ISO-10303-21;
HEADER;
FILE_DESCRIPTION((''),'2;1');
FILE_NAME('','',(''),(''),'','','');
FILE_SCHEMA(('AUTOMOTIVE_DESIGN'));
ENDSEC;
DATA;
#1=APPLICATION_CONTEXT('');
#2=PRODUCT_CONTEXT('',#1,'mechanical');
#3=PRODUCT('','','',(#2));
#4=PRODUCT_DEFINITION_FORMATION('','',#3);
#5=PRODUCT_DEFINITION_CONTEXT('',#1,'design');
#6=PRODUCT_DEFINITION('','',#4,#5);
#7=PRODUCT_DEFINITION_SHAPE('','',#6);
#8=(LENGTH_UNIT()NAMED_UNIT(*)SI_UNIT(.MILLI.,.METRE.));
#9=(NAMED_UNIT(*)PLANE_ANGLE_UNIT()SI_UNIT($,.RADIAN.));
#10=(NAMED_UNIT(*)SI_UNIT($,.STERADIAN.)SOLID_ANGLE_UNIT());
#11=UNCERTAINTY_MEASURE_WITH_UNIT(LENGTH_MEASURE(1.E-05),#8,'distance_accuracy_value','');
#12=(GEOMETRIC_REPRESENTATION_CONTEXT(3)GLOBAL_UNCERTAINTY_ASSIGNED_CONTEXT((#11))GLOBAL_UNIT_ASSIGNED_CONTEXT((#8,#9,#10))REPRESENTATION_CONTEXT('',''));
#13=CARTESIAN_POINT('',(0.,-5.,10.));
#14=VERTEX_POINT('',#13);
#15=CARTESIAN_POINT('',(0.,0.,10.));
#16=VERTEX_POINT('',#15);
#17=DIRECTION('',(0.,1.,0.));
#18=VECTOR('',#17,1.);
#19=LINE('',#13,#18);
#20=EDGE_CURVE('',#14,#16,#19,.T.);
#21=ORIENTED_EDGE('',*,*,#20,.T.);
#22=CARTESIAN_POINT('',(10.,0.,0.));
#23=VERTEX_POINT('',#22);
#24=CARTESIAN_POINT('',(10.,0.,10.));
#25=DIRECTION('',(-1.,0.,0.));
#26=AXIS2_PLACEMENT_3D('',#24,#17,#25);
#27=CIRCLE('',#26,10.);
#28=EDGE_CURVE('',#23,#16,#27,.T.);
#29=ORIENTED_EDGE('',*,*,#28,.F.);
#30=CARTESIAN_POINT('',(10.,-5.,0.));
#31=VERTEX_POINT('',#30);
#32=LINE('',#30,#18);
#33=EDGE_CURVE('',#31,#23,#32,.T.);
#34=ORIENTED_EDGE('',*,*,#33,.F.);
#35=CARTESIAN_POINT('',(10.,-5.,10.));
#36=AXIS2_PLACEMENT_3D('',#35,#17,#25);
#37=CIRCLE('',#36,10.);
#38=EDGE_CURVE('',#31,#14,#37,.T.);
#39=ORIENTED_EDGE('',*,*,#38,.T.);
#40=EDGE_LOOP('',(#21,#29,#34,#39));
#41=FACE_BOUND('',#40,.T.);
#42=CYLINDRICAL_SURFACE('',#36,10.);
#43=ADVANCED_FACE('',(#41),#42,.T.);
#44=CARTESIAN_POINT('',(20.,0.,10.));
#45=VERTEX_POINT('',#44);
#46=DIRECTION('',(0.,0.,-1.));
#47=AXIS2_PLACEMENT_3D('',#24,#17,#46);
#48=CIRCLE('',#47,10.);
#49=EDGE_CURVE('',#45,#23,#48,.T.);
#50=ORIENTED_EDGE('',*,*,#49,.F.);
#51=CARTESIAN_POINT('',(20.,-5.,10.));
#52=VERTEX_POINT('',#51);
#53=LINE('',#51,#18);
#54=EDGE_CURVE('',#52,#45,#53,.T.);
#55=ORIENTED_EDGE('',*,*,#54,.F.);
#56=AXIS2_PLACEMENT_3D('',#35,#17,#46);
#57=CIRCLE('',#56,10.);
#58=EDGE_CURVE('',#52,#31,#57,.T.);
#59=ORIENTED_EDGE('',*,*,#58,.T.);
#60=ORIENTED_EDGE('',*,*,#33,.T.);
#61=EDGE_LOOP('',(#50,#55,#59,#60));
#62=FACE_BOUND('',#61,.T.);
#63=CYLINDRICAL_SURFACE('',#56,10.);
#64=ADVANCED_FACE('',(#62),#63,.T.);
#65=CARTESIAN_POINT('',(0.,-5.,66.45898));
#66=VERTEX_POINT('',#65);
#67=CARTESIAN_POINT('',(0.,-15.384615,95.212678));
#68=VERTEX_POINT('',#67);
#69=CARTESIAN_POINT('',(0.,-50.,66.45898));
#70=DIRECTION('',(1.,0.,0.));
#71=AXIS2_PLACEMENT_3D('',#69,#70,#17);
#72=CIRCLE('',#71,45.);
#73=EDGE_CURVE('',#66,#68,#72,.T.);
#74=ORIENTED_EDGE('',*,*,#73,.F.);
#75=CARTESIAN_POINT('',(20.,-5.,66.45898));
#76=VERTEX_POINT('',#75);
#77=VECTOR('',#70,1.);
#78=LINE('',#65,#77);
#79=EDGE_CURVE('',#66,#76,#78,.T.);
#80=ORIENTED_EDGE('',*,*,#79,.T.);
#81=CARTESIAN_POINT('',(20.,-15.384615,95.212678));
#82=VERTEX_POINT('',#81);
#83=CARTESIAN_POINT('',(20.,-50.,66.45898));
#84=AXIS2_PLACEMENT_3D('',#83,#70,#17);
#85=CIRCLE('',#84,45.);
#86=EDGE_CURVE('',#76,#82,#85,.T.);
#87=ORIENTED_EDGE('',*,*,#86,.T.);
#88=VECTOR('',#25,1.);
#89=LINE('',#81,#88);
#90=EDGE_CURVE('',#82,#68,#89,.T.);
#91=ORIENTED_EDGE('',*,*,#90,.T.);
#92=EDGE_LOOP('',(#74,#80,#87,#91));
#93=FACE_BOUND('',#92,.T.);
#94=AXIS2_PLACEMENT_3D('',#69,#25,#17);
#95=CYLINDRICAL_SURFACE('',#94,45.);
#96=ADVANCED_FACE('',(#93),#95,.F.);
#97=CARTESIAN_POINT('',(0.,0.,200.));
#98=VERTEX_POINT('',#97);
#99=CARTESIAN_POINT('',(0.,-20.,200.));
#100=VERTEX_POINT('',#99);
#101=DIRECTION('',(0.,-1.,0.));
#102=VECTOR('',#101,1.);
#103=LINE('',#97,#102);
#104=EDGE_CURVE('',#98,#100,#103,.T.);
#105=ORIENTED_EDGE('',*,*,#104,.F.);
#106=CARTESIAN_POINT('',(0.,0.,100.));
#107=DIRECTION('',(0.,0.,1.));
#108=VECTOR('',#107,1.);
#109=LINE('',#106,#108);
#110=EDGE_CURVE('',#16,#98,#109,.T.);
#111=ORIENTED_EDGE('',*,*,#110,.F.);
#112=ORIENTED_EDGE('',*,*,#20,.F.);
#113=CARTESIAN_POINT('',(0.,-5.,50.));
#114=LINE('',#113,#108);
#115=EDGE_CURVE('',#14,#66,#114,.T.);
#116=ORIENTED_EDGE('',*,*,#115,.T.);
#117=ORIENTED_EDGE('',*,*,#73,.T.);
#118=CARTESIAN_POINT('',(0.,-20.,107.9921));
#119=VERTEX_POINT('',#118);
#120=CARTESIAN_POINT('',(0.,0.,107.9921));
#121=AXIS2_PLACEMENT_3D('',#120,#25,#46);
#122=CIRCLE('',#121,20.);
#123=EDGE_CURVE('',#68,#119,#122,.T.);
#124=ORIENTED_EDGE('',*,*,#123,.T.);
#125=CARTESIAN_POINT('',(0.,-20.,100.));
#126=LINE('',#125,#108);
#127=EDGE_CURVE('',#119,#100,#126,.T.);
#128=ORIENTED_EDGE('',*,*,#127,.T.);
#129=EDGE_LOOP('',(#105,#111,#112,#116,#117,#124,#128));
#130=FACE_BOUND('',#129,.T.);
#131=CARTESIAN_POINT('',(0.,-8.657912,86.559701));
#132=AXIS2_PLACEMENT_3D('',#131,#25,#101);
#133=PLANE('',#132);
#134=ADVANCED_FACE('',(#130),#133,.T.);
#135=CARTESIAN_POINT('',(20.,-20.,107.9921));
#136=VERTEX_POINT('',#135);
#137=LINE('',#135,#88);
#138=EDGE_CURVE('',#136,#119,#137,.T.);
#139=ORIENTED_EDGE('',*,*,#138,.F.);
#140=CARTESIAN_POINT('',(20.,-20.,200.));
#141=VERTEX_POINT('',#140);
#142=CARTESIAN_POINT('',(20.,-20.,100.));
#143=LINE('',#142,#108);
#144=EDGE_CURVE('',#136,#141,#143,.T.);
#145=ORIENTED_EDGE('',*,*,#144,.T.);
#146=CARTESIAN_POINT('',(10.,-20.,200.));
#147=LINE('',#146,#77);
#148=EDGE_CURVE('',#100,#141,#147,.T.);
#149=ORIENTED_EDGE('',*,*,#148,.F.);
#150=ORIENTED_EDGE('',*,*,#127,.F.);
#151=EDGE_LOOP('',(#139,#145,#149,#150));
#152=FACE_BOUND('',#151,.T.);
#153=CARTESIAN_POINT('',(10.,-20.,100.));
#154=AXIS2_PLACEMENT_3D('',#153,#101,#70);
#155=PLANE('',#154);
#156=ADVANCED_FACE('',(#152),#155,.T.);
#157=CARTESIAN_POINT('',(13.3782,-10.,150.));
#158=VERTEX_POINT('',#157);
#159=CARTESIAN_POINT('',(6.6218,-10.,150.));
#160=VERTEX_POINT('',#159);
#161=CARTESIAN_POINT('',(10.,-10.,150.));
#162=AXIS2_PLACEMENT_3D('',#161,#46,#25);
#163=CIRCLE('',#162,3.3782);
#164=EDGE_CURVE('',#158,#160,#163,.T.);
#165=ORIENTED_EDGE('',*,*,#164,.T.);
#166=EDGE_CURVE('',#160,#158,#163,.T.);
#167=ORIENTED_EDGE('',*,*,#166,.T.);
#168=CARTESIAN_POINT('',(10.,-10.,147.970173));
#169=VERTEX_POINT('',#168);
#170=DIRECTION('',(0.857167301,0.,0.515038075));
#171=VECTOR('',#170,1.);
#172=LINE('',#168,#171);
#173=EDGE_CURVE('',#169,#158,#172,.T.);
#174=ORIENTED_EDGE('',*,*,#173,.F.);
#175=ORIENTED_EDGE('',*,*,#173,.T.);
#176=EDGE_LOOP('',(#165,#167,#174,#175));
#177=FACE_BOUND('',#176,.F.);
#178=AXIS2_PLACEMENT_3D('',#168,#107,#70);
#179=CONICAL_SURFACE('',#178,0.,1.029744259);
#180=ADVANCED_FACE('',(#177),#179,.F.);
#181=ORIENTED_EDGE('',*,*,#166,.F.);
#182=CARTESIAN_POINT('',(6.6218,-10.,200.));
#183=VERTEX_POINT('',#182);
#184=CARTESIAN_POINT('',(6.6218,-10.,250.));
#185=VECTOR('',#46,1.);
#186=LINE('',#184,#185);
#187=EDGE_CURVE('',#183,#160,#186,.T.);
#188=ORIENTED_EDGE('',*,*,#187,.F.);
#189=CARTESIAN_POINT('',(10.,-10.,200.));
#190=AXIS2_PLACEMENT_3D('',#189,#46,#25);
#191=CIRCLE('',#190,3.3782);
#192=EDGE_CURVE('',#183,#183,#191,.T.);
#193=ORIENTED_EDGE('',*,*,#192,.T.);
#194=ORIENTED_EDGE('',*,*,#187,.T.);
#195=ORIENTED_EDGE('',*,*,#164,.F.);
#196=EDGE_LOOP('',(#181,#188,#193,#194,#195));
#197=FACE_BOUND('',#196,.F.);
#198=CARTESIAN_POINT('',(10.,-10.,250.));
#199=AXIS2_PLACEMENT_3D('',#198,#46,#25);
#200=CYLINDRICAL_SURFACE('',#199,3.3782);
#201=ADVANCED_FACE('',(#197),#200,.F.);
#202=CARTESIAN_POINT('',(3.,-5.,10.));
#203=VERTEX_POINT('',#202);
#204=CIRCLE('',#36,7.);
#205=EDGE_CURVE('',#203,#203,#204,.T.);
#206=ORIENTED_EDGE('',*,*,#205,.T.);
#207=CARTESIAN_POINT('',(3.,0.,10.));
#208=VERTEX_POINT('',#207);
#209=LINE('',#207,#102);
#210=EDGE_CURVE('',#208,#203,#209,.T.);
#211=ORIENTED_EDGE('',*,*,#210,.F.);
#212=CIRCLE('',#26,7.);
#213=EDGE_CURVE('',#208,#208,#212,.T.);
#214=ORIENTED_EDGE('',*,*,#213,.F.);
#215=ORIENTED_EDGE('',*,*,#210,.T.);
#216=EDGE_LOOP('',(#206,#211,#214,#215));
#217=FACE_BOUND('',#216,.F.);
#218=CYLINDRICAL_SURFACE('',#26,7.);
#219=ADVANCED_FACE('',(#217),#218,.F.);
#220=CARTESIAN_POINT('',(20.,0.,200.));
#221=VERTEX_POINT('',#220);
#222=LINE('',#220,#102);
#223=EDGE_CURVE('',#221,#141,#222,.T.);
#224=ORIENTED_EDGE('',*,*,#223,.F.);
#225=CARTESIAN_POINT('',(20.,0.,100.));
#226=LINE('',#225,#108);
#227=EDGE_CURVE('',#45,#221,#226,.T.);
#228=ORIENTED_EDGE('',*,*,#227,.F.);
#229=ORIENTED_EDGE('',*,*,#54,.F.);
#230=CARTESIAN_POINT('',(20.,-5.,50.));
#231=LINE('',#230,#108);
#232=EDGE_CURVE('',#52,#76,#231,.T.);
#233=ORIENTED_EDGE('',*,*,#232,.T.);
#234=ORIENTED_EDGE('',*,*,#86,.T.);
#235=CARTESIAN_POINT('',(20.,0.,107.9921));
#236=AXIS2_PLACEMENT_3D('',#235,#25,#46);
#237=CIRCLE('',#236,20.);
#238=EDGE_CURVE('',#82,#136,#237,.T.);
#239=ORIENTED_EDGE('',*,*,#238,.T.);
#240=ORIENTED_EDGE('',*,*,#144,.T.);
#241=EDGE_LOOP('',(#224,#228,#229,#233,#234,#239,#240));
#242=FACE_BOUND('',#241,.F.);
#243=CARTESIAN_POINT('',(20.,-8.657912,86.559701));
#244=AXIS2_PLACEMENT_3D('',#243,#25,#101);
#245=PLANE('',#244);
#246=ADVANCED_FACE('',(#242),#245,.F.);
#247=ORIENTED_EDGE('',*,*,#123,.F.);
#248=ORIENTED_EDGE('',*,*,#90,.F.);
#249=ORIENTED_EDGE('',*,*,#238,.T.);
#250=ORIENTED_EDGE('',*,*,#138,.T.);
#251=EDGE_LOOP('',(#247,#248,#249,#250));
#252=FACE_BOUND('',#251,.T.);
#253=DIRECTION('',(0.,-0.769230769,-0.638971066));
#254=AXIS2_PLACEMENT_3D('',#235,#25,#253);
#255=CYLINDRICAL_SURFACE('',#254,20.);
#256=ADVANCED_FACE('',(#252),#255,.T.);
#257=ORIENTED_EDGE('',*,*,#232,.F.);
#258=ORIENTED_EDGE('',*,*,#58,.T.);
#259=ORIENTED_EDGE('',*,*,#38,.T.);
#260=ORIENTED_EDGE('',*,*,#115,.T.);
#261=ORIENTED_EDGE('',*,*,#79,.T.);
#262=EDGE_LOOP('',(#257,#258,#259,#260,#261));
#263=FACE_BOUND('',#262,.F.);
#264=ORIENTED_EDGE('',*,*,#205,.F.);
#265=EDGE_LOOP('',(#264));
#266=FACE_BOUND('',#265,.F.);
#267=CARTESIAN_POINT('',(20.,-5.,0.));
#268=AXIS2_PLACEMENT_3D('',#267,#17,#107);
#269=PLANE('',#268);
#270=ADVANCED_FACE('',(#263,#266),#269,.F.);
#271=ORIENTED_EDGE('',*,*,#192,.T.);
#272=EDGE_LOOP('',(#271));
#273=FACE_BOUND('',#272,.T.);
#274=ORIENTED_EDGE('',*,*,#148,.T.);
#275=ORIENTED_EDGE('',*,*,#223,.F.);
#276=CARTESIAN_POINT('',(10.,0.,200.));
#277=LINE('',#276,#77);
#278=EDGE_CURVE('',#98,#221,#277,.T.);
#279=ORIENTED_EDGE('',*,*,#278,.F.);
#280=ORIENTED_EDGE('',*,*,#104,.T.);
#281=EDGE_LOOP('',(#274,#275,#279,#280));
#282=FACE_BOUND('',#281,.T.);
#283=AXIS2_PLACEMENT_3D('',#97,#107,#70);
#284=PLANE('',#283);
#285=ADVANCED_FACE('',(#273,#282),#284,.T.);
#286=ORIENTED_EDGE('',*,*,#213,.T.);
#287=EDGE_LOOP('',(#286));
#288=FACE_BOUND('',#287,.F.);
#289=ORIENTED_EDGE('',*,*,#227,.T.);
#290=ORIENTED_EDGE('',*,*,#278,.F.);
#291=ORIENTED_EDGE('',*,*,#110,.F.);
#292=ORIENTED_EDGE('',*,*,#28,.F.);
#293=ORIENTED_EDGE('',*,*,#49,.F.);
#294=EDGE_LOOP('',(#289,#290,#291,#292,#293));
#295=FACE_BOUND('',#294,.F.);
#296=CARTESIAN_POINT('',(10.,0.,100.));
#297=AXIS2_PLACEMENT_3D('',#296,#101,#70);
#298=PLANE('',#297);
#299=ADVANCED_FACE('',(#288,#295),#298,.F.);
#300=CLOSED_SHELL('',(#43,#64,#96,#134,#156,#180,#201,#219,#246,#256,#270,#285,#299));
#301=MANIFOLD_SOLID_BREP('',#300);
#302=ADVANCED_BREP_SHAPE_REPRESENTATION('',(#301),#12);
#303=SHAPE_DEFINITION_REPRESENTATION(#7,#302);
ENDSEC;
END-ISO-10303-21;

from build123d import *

# Parameters (mm, degrees)
F0_W        = 20
F0_H        = 200
F1_DEPTH    = 20
F2_W        = 15
F2_H        = 100
F3_DEPTH    = 20
F6_R        = 7
F7_DEPTH    = 20.001
F8_T1_DEPTH = 20
F9_R        = 20
F11_D       = 6.7564
F11_DEPTH   = 50
F11_TIP     = 2.0298273432


# Not quite as in the source:
# - a fillet or chamfer that OpenCascade refuses, or shapes differently, is made with other operations: its cross-section is extruded or revolved along the edge and cut away or added


with BuildPart() as f1:
    # F0 (on Front) → F1 (new body)
    with BuildSketch(Plane.XZ):
        with Locations((10, 100)):
            Rectangle(F0_W, F0_H)
    extrude(amount=F1_DEPTH)

    # F2 (on face) → F3 (cut)
    with BuildSketch(Plane.YZ.offset(20)):
        with Locations((-12.5, 50)):
            Rectangle(F2_W, F2_H)
    extrude(amount=-F3_DEPTH, mode=Mode.SUBTRACT)

    # F5: sweep along a path in F5_path
    with BuildLine(Plane(origin=(0, -5, 0), x_dir=(0, -1, 0), z_dir=(0, 0, -1))) as f5_path:
        Line((0, 0), (-5, 0))
    # F4 (on face) → F5 (sweep, cut)
    with BuildSketch(Plane(origin=(0, 0, 0), x_dir=(-1, 0, 0), z_dir=(0, 1, 0))):
        with BuildLine():
            Line((0, 0), (0, 10))
            ThreePointArc((0, 10), (-2.9289321881, 2.9289321881), (-10, 0))
            Line((-10, 0), (0, 0))
        make_face()
        with BuildLine():
            ThreePointArc((-10, 0), (-17.0710678277, 2.9289322039), (-20, 10.0000000447))
            Line((-20, 10.0000000447), (-20, 0))
            Line((-20, 0), (-10, 0))
        make_face()
    sweep(path=f5_path.line, mode=Mode.SUBTRACT)

    # F6 (on face) → F7 (cut, through all)
    with BuildSketch(Plane(origin=(0, 0, 0), x_dir=(-1, 0, 0), z_dir=(0, 1, 0))):
        with Locations((-10, 10)):
            Circle(F6_R)
    extrude(amount=-F7_DEPTH, mode=Mode.SUBTRACT)

    # F8: fillet of radius 45 on 1 edges, made by hand

    # F8_s2 → F8_t1 (join)
    with BuildSketch(Plane.YZ):
        with BuildLine():
            ThreePointArc((-5, 66.4589803375), (-8.9208081871, 84.8301534084), (-20, 100))
            Line((-20, 100), (-5, 100))
            Line((-5, 100), (-5, 66.4589803375))
        make_face()
    extrude(amount=F8_T1_DEPTH)

    # F9
    f9_edges = [f1.edges().sort_by_distance(p)[0] for p in [
        (10, -20, 100),
    ]]
    fillet(f9_edges, radius=F9_R)

    # F11
    with Locations(Plane.XY.offset(200)):
        with Locations((10, -10)):
            Hole(F11_D / 2, depth=F11_DEPTH)
            with Locations((0, 0, -(F11_DEPTH + F11_TIP / 2))):  # 118° drill point
                Cone(0, F11_D / 2, F11_TIP, mode=Mode.SUBTRACT)


solid = f1.part
